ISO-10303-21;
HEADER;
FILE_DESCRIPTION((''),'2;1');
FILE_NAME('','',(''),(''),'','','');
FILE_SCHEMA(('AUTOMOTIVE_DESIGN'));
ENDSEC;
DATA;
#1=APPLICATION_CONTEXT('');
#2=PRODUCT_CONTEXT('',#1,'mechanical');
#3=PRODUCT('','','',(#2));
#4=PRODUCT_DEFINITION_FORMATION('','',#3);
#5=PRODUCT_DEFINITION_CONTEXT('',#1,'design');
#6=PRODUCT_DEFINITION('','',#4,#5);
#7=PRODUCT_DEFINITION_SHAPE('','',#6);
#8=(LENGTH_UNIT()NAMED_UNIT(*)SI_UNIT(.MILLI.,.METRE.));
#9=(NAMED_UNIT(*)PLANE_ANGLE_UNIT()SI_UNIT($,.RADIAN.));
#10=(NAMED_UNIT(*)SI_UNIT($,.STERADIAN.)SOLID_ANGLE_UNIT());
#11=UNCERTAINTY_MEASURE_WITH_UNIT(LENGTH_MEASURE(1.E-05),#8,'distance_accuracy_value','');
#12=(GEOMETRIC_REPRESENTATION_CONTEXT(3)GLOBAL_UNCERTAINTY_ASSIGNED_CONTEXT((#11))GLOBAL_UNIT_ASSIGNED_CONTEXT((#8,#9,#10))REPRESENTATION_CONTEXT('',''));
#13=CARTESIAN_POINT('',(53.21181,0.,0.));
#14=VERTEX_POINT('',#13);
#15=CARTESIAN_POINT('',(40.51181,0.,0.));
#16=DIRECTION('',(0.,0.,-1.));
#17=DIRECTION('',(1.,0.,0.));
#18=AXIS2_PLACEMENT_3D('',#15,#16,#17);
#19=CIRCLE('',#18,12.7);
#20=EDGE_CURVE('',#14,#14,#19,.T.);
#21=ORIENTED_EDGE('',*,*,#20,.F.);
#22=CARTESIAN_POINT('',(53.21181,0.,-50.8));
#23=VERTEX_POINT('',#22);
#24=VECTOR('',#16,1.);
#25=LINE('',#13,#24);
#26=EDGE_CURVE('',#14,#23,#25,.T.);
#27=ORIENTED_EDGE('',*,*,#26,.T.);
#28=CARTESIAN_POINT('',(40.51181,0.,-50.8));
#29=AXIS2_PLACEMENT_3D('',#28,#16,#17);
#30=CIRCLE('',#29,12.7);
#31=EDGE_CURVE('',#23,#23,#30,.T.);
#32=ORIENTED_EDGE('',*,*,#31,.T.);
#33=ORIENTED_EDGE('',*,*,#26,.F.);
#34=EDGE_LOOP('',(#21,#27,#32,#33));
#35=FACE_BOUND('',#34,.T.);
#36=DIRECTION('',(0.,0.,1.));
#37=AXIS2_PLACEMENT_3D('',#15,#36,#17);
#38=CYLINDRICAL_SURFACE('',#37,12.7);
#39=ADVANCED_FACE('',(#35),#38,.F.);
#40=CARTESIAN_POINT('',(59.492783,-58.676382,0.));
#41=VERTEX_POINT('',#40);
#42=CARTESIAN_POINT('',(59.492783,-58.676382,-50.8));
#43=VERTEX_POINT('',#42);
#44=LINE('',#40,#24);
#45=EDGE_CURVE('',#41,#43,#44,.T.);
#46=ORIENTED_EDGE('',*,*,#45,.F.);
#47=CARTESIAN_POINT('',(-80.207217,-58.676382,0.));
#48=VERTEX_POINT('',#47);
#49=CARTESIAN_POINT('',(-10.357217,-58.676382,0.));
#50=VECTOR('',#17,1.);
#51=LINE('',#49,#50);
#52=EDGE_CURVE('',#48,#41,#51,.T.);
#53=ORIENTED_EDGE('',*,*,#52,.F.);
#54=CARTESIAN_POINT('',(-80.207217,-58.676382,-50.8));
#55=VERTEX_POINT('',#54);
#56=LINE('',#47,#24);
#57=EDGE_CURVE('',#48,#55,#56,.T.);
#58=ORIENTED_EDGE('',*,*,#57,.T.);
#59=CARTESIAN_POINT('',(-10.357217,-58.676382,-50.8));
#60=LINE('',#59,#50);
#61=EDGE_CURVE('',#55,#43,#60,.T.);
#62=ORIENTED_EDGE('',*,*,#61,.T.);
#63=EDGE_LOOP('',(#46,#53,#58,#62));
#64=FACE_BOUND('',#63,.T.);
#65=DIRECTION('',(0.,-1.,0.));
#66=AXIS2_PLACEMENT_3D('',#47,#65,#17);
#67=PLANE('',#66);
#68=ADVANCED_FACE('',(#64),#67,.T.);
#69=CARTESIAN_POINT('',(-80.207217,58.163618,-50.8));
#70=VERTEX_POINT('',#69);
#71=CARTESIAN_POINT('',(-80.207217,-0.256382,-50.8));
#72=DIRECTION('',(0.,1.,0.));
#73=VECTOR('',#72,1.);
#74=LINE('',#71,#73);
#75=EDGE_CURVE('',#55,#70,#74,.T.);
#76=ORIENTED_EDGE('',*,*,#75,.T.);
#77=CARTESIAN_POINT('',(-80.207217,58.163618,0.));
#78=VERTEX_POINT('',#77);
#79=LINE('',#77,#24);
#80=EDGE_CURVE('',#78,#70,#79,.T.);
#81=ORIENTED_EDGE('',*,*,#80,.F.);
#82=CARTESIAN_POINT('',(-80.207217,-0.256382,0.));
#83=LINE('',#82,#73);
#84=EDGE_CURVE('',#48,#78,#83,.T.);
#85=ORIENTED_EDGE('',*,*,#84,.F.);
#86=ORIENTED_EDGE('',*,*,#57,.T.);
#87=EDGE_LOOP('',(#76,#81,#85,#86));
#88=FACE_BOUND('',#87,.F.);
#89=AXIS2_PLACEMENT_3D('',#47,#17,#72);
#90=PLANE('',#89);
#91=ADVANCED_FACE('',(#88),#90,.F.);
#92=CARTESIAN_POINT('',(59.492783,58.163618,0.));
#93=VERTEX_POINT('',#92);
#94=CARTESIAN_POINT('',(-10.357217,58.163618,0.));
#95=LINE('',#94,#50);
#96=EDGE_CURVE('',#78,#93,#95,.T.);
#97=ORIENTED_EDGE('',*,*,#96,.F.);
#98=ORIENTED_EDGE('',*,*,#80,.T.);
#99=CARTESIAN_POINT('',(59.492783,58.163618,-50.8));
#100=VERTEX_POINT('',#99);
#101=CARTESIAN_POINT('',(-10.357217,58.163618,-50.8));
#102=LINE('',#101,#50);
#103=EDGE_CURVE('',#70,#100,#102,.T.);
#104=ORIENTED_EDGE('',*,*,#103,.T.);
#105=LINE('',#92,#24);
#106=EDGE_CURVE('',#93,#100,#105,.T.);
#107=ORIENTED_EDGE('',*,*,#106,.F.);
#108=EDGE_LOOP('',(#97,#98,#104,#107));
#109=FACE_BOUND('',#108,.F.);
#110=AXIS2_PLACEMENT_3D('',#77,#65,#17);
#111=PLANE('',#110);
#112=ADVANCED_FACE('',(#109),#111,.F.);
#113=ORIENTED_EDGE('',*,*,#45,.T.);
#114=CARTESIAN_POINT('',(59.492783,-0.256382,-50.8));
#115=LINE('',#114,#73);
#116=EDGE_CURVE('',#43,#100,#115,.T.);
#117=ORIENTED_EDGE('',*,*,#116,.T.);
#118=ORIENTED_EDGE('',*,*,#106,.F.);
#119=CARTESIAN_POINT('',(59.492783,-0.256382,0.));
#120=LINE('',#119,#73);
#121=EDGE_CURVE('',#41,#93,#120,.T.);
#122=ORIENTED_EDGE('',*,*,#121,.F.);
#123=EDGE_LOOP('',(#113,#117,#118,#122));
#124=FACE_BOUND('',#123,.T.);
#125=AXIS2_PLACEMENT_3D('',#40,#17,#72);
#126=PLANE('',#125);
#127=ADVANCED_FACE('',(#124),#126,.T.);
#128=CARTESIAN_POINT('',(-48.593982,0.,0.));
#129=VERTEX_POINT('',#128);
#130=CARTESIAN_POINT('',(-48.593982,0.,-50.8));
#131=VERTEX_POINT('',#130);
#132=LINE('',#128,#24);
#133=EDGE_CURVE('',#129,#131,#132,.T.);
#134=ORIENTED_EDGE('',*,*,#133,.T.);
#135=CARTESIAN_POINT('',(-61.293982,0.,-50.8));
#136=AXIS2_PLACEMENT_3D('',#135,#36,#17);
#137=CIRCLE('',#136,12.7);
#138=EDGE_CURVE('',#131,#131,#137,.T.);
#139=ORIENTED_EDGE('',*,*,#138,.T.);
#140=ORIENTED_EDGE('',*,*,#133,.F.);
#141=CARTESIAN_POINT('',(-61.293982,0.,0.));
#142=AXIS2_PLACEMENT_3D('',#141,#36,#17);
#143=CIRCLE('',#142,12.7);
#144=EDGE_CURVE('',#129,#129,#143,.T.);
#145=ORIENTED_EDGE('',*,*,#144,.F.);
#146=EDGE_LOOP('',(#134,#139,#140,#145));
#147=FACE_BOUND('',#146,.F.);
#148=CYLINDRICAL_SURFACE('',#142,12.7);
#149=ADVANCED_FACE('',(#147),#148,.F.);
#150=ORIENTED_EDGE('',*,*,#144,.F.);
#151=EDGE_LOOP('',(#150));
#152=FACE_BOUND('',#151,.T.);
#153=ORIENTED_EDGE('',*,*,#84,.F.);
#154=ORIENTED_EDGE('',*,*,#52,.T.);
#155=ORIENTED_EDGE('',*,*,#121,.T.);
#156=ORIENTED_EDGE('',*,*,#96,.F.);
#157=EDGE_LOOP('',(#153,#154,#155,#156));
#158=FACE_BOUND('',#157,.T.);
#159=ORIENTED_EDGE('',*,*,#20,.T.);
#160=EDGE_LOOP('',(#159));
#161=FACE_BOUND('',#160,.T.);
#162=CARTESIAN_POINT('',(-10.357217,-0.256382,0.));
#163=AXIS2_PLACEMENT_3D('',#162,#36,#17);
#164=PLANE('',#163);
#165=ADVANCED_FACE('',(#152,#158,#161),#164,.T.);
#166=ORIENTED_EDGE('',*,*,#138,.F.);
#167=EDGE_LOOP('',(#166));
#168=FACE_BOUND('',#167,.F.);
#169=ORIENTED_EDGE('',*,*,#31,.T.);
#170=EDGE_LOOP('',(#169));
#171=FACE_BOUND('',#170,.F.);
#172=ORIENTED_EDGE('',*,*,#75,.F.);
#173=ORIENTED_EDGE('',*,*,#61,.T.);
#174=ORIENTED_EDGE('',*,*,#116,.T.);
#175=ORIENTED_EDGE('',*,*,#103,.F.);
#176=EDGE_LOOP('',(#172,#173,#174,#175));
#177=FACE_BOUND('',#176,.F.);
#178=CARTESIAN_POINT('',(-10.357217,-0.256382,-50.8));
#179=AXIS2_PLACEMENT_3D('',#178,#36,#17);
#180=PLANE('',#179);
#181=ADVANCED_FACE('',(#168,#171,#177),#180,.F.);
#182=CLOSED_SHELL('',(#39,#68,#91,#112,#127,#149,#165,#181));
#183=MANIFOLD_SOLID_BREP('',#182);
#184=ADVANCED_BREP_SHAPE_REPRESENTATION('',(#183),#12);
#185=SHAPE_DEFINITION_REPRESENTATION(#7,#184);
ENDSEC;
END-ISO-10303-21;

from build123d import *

# Parameters (mm, degrees)
F0_W     = 139.7
F0_H     = 116.84
F0_R     = 12.7
F1_DEPTH = 50.8


# Not quite as in the source:
# - the program builds the solid bodies; features that only make, move or delete a surface that nothing else refers to are left out


with BuildPart() as f1:
    # F0 (on Top) → F1 (new body)
    with BuildSketch(Plane.XY):
        with Locations((-10.3572173724, -0.2563824468)):
            Rectangle(F0_W, F0_H)
        with Locations((-61.2939819694, 0)):
            Circle(F0_R, mode=Mode.SUBTRACT)
        with BuildLine():
            ThreePointArc((27.8118101201, 0), (40.5118101201, 12.7), (53.2118101201, 0))
            ThreePointArc((53.2118101201, 0), (40.5118101201, -12.7), (27.8118101201, 0))
        make_face(mode=Mode.SUBTRACT)
    extrude(amount=-F1_DEPTH)


solid = f1.part
